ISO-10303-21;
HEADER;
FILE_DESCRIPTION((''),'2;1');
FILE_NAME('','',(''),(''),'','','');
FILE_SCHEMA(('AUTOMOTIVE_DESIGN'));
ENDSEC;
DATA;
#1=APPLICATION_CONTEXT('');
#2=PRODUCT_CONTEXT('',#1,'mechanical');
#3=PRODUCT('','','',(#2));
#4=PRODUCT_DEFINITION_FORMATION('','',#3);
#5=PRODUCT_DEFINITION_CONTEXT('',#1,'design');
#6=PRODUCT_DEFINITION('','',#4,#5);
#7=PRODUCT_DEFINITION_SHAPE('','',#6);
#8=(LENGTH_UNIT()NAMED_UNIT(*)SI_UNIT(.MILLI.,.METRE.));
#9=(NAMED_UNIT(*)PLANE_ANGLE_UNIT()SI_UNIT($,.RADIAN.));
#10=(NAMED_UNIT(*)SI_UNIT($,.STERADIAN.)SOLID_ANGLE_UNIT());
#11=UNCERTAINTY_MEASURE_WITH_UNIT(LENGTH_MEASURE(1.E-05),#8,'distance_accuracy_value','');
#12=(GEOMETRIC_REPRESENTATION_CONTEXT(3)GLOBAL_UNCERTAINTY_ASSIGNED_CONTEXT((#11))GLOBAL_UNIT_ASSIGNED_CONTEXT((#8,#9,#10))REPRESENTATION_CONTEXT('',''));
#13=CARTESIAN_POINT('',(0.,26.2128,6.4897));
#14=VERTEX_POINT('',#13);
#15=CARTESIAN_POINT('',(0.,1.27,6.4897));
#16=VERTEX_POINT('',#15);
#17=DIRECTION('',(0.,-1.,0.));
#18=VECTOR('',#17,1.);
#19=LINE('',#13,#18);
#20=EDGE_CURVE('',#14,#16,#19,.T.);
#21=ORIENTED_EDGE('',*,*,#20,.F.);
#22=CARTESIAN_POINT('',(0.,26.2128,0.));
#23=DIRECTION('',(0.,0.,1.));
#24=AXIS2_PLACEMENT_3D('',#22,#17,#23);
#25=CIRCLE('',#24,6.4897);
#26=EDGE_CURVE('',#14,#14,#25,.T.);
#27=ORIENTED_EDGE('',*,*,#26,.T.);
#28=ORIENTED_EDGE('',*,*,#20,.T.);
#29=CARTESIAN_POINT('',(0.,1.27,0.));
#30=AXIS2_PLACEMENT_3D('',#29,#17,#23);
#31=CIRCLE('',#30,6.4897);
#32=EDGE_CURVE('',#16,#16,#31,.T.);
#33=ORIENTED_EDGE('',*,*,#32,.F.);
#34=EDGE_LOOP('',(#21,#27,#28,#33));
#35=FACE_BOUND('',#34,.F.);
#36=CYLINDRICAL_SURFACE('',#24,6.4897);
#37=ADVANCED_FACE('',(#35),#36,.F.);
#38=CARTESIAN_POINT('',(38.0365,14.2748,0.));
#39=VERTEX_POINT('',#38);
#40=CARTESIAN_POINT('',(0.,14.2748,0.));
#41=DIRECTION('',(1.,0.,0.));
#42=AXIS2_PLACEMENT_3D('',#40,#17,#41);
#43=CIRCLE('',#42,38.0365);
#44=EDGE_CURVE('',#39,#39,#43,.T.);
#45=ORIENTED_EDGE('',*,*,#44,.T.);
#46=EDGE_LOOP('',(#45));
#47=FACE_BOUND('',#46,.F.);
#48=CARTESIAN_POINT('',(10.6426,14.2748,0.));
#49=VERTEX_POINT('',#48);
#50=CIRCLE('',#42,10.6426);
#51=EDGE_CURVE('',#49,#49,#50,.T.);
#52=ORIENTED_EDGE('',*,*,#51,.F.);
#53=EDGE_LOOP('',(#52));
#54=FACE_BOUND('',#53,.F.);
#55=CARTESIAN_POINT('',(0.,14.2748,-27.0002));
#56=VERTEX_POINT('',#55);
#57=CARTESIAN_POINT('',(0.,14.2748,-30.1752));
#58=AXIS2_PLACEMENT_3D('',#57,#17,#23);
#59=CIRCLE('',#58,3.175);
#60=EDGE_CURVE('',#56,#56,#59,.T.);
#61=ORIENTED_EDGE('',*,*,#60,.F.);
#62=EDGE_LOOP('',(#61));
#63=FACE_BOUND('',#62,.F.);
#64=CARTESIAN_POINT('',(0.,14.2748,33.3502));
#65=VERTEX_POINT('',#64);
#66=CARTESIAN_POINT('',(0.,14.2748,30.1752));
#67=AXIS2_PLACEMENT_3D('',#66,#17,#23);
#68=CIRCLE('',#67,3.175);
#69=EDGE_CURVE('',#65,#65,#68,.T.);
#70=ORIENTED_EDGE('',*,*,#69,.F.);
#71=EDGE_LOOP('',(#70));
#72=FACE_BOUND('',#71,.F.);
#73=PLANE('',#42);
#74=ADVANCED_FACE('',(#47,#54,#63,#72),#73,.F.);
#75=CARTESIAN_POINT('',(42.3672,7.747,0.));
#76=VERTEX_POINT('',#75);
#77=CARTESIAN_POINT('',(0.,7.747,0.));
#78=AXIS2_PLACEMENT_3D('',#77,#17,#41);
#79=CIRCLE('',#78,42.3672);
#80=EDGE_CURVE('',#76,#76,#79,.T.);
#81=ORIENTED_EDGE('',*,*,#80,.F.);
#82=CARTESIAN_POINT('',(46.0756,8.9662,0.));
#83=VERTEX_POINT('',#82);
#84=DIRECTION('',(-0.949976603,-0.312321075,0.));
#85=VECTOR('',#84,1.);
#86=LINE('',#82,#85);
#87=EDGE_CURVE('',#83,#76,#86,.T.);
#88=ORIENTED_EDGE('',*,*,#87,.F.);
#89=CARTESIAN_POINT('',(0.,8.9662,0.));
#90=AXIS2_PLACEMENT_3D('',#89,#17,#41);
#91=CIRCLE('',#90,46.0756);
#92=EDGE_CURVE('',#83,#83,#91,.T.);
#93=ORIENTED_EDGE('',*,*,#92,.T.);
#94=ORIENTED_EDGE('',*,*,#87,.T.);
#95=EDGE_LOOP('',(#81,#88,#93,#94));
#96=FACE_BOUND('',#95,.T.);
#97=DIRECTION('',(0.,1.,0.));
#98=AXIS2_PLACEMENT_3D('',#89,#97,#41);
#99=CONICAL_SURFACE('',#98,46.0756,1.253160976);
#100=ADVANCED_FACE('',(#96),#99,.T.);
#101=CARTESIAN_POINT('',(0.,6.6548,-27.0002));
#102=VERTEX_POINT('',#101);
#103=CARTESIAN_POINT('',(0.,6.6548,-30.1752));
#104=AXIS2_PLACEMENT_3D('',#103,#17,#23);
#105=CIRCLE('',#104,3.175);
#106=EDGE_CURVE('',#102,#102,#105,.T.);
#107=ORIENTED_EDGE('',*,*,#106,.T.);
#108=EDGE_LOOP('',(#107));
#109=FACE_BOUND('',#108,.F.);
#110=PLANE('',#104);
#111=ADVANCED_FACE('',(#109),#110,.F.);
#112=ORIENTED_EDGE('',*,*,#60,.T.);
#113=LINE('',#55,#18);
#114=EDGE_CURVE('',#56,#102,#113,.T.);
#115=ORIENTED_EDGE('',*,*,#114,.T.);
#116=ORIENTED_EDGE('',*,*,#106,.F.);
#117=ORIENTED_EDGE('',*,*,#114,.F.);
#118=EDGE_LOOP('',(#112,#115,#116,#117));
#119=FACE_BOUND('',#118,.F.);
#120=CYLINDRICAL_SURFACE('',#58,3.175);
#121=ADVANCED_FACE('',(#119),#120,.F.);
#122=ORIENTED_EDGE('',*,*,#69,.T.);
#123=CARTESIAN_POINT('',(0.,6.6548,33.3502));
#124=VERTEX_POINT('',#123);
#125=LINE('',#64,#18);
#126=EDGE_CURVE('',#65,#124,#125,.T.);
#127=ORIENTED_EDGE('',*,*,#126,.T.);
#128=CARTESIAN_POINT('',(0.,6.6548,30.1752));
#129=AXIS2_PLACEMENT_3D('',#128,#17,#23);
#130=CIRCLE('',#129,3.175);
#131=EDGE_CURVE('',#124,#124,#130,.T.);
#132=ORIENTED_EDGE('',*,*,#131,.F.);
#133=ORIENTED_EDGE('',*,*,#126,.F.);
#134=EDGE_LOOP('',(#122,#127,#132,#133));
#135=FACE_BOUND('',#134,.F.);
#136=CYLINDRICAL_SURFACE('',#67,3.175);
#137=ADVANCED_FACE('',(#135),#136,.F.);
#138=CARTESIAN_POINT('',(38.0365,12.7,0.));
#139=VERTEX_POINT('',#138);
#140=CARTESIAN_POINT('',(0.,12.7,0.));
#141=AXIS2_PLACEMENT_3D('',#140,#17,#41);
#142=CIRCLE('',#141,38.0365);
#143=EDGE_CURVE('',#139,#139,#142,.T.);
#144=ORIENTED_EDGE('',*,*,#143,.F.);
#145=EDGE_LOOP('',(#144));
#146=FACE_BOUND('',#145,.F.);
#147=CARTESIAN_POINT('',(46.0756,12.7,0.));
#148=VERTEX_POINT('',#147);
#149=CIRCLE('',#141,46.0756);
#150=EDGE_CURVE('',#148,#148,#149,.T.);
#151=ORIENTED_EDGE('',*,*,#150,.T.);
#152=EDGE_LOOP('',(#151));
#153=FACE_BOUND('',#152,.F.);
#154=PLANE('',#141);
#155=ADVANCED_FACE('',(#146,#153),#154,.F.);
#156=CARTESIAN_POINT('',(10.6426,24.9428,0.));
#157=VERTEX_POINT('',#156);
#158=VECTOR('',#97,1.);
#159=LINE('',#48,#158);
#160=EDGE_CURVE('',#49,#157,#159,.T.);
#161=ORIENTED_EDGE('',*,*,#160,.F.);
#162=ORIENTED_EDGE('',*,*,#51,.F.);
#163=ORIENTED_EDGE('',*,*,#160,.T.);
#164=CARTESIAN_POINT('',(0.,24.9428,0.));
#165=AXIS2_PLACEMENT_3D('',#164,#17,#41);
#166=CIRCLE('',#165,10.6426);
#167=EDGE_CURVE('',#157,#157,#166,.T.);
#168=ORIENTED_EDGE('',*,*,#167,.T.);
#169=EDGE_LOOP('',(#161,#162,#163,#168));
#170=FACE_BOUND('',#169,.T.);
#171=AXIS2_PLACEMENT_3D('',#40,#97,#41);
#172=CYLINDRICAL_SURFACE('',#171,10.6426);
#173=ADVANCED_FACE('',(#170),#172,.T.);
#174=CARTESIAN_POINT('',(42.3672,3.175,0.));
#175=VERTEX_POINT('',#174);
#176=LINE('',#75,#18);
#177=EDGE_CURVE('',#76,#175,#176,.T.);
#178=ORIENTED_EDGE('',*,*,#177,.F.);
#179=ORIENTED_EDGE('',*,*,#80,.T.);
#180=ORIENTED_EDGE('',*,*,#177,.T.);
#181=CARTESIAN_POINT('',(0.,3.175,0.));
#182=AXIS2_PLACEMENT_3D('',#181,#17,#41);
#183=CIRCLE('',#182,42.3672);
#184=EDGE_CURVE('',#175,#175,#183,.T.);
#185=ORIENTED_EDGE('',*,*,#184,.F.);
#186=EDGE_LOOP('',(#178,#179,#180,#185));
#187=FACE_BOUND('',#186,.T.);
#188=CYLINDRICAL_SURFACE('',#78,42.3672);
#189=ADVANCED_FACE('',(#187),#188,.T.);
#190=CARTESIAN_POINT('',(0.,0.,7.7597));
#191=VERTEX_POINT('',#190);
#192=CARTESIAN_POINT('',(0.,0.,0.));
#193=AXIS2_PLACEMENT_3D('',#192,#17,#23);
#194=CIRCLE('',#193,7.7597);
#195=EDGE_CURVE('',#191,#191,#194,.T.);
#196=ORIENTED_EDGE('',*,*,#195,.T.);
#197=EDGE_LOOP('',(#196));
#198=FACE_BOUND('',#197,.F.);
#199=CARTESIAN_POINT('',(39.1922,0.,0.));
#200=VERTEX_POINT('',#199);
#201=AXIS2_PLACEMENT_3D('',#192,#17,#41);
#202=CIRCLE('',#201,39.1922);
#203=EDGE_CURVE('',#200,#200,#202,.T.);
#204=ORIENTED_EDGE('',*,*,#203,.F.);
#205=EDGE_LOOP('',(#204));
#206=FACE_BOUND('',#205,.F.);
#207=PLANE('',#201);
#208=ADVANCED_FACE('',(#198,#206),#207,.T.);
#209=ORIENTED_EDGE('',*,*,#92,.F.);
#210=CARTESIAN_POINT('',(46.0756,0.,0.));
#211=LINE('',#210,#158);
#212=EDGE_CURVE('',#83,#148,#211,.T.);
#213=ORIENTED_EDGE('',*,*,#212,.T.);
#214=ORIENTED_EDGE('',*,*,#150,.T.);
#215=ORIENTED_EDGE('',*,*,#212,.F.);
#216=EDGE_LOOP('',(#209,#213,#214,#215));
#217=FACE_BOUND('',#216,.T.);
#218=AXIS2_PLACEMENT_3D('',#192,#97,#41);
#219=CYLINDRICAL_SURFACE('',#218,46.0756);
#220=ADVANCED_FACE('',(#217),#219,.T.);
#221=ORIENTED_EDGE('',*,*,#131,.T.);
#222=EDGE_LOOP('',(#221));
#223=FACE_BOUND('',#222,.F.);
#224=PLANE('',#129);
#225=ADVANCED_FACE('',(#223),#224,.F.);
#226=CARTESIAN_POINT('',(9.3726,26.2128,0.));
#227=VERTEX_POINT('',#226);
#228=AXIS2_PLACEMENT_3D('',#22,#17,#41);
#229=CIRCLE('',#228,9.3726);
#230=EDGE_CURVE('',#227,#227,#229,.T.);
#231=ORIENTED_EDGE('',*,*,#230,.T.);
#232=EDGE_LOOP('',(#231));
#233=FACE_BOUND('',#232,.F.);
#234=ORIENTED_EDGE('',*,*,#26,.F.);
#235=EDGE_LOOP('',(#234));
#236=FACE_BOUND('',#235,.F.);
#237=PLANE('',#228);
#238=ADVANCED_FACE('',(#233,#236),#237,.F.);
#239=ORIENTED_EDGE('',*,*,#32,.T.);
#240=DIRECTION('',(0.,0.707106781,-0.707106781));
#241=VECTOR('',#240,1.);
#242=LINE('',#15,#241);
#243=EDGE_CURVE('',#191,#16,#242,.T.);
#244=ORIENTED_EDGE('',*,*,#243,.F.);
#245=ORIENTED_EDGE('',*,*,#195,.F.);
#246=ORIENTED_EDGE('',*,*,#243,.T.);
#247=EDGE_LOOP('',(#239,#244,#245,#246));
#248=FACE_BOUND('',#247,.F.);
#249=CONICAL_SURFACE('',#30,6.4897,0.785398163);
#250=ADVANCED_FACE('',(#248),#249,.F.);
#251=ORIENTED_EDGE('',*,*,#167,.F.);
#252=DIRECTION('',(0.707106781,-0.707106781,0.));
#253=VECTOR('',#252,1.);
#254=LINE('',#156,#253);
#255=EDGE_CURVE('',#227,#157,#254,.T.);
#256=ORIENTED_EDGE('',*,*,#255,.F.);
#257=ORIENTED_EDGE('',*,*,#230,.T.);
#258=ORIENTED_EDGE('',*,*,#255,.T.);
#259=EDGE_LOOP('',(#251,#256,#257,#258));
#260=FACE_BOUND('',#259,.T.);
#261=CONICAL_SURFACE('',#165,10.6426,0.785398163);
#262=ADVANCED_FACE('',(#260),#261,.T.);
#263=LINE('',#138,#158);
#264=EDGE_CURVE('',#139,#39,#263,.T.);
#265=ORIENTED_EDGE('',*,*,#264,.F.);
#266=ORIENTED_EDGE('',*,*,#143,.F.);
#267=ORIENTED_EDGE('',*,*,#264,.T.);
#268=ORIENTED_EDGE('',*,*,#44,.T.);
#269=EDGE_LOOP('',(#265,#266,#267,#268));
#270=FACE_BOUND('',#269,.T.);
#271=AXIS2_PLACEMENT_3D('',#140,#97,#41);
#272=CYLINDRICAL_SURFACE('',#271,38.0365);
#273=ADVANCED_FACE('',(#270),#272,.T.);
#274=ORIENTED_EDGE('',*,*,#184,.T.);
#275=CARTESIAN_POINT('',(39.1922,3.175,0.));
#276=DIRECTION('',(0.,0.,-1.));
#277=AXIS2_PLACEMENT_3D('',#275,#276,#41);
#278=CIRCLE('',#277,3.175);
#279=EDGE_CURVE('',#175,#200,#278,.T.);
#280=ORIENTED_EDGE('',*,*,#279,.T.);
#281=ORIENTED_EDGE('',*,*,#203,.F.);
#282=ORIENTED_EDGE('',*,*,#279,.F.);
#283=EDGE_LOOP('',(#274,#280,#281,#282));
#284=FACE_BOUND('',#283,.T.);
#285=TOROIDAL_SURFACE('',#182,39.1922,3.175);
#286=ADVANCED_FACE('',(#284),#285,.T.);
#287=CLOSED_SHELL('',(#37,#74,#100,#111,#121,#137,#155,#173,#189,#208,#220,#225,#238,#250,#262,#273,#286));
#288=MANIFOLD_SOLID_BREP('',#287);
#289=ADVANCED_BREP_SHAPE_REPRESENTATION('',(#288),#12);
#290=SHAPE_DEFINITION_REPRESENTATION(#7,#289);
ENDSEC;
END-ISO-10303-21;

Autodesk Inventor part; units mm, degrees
ref_plane "YZ Plane" through (0, 0, 0) normal (1, 0, 0) x (0, 1, 0)
ref_plane "XZ Plane" through (0, 0, 0) normal (0, 1, 0) x (-1, 0, 0)
ref_plane "XY Plane" through (0, 0, 0) normal (0, 0, 1) x (1, 0, 0)
sketch "Sketch1" plane through (0, 0, 0) normal (0, 0, 1) x (1, 0, 0)
  line L0 (17.5514, 0) -> (46.0756, 0)
  line L1 (46.0756, 0) -> (46.0756, 12.7)
  line L2 (46.0756, 12.7) -> (0, 12.7)
  line L3 (0, 12.7) -> (0, 0)
  line L4 (17.5514, 12.7) -> (17.5514, 0)
  line L5 (46.0756, 8.9662) -> (42.3672, 8.9662)
  line L6 (42.3672, 7.747) -> (42.3672, 0)
  line L7 (46.0756, 7.747) -> (42.3672, 7.747)
  line L8 (46.0756, 8.9662) -> (42.3672, 7.747)
  line L9 (0, 11.1252) -> (0, 12.7)
  line L10 (17.5514, 0) -> (23.85, 0)
  line L11 (0, -2.5) -> (0, 0)
  line L12 (0, 12.7) -> (38.0365, 12.7)
  line L13 (38.0365, 12.7) -> (38.0365, 14.2748)
  line L14 (38.0365, 14.2748) -> (0, 14.2748)
  line L15 (0, 14.2748) -> (0, 12.7)
  line L16 (17.5514, 12.7) -> (17.5514, 14.2748)
  line L17 (0, 0) -> (17.5514, 0)
  line L18 (0, 14.2748) -> (10.6426, 14.2748)
  line L19 (10.6426, 14.2748) -> (10.6426, 26.2128)
  line L20 (10.6426, 26.2128) -> (0, 26.2128)
  line L21 (0, 26.2128) -> (0, 14.2748)
  dimension "d1" = 12.7
  dimension "d3" = 3.7338
  dimension "d5" = 4.953
  dimension "d8" = 17.5514
  dimension "d9" = 42.3672
  dimension "d10" = 46.0756
  dimension "d11" = 1.5748
  dimension "d12" = 38.0365
  dimension "d23" = 11.938
  dimension "d24" = 10.6426
revolve "Revolution1" add sketch "Sketch1" angle 360 about axis through (0, 12.7, 0) along (0, -1, 0) contours L4 L2 L1 L8 L6 L0 | L17 L3 L2 L4 | L16 L14 L13 L2 | L2 L15 L14 L16 | L21 L20 L19 L14
sketch "Sketch2" plane through (0, 14.2748, 0) normal (0, 1, 0) x (1, 0, 0)
  circle A0 centre (0, 0) radius 30.1752
  point P0 (0, 30.1752)
  point P1 (0, -30.1752)
  dimension "d14" = 60.3504
hole "Hole1" at (0, 14.2748, -30.1752) at (0, 14.2748, 30.1752) direction (0, -1, 0) diameter 6.35 depth 7.62
fillet "Fillet1" radius 3.175 1 edges at (-42.3672, 0, 0)
sketch "Sketch3" plane through (0, 26.2128, 0) normal (0, 1, 0) x (1, 0, 0)
  point P0 (0, 0)
  point P1 (0, 0)
hole "Hole2" at (0, 26.2128, 0) direction (0, -1, 0) diameter 12.9794 end through all
chamfer "Chamfer1" distance 1.27 angle 45 1 edges at (0, 0, -6.4897)
chamfer "Chamfer2" distance 1.27 angle 45 1 edges at (-10.6426, 26.2128, 0)
properties part number "2016.06.09 ThorLabs Photodiode Adapter" material "Aluminum 6061"
